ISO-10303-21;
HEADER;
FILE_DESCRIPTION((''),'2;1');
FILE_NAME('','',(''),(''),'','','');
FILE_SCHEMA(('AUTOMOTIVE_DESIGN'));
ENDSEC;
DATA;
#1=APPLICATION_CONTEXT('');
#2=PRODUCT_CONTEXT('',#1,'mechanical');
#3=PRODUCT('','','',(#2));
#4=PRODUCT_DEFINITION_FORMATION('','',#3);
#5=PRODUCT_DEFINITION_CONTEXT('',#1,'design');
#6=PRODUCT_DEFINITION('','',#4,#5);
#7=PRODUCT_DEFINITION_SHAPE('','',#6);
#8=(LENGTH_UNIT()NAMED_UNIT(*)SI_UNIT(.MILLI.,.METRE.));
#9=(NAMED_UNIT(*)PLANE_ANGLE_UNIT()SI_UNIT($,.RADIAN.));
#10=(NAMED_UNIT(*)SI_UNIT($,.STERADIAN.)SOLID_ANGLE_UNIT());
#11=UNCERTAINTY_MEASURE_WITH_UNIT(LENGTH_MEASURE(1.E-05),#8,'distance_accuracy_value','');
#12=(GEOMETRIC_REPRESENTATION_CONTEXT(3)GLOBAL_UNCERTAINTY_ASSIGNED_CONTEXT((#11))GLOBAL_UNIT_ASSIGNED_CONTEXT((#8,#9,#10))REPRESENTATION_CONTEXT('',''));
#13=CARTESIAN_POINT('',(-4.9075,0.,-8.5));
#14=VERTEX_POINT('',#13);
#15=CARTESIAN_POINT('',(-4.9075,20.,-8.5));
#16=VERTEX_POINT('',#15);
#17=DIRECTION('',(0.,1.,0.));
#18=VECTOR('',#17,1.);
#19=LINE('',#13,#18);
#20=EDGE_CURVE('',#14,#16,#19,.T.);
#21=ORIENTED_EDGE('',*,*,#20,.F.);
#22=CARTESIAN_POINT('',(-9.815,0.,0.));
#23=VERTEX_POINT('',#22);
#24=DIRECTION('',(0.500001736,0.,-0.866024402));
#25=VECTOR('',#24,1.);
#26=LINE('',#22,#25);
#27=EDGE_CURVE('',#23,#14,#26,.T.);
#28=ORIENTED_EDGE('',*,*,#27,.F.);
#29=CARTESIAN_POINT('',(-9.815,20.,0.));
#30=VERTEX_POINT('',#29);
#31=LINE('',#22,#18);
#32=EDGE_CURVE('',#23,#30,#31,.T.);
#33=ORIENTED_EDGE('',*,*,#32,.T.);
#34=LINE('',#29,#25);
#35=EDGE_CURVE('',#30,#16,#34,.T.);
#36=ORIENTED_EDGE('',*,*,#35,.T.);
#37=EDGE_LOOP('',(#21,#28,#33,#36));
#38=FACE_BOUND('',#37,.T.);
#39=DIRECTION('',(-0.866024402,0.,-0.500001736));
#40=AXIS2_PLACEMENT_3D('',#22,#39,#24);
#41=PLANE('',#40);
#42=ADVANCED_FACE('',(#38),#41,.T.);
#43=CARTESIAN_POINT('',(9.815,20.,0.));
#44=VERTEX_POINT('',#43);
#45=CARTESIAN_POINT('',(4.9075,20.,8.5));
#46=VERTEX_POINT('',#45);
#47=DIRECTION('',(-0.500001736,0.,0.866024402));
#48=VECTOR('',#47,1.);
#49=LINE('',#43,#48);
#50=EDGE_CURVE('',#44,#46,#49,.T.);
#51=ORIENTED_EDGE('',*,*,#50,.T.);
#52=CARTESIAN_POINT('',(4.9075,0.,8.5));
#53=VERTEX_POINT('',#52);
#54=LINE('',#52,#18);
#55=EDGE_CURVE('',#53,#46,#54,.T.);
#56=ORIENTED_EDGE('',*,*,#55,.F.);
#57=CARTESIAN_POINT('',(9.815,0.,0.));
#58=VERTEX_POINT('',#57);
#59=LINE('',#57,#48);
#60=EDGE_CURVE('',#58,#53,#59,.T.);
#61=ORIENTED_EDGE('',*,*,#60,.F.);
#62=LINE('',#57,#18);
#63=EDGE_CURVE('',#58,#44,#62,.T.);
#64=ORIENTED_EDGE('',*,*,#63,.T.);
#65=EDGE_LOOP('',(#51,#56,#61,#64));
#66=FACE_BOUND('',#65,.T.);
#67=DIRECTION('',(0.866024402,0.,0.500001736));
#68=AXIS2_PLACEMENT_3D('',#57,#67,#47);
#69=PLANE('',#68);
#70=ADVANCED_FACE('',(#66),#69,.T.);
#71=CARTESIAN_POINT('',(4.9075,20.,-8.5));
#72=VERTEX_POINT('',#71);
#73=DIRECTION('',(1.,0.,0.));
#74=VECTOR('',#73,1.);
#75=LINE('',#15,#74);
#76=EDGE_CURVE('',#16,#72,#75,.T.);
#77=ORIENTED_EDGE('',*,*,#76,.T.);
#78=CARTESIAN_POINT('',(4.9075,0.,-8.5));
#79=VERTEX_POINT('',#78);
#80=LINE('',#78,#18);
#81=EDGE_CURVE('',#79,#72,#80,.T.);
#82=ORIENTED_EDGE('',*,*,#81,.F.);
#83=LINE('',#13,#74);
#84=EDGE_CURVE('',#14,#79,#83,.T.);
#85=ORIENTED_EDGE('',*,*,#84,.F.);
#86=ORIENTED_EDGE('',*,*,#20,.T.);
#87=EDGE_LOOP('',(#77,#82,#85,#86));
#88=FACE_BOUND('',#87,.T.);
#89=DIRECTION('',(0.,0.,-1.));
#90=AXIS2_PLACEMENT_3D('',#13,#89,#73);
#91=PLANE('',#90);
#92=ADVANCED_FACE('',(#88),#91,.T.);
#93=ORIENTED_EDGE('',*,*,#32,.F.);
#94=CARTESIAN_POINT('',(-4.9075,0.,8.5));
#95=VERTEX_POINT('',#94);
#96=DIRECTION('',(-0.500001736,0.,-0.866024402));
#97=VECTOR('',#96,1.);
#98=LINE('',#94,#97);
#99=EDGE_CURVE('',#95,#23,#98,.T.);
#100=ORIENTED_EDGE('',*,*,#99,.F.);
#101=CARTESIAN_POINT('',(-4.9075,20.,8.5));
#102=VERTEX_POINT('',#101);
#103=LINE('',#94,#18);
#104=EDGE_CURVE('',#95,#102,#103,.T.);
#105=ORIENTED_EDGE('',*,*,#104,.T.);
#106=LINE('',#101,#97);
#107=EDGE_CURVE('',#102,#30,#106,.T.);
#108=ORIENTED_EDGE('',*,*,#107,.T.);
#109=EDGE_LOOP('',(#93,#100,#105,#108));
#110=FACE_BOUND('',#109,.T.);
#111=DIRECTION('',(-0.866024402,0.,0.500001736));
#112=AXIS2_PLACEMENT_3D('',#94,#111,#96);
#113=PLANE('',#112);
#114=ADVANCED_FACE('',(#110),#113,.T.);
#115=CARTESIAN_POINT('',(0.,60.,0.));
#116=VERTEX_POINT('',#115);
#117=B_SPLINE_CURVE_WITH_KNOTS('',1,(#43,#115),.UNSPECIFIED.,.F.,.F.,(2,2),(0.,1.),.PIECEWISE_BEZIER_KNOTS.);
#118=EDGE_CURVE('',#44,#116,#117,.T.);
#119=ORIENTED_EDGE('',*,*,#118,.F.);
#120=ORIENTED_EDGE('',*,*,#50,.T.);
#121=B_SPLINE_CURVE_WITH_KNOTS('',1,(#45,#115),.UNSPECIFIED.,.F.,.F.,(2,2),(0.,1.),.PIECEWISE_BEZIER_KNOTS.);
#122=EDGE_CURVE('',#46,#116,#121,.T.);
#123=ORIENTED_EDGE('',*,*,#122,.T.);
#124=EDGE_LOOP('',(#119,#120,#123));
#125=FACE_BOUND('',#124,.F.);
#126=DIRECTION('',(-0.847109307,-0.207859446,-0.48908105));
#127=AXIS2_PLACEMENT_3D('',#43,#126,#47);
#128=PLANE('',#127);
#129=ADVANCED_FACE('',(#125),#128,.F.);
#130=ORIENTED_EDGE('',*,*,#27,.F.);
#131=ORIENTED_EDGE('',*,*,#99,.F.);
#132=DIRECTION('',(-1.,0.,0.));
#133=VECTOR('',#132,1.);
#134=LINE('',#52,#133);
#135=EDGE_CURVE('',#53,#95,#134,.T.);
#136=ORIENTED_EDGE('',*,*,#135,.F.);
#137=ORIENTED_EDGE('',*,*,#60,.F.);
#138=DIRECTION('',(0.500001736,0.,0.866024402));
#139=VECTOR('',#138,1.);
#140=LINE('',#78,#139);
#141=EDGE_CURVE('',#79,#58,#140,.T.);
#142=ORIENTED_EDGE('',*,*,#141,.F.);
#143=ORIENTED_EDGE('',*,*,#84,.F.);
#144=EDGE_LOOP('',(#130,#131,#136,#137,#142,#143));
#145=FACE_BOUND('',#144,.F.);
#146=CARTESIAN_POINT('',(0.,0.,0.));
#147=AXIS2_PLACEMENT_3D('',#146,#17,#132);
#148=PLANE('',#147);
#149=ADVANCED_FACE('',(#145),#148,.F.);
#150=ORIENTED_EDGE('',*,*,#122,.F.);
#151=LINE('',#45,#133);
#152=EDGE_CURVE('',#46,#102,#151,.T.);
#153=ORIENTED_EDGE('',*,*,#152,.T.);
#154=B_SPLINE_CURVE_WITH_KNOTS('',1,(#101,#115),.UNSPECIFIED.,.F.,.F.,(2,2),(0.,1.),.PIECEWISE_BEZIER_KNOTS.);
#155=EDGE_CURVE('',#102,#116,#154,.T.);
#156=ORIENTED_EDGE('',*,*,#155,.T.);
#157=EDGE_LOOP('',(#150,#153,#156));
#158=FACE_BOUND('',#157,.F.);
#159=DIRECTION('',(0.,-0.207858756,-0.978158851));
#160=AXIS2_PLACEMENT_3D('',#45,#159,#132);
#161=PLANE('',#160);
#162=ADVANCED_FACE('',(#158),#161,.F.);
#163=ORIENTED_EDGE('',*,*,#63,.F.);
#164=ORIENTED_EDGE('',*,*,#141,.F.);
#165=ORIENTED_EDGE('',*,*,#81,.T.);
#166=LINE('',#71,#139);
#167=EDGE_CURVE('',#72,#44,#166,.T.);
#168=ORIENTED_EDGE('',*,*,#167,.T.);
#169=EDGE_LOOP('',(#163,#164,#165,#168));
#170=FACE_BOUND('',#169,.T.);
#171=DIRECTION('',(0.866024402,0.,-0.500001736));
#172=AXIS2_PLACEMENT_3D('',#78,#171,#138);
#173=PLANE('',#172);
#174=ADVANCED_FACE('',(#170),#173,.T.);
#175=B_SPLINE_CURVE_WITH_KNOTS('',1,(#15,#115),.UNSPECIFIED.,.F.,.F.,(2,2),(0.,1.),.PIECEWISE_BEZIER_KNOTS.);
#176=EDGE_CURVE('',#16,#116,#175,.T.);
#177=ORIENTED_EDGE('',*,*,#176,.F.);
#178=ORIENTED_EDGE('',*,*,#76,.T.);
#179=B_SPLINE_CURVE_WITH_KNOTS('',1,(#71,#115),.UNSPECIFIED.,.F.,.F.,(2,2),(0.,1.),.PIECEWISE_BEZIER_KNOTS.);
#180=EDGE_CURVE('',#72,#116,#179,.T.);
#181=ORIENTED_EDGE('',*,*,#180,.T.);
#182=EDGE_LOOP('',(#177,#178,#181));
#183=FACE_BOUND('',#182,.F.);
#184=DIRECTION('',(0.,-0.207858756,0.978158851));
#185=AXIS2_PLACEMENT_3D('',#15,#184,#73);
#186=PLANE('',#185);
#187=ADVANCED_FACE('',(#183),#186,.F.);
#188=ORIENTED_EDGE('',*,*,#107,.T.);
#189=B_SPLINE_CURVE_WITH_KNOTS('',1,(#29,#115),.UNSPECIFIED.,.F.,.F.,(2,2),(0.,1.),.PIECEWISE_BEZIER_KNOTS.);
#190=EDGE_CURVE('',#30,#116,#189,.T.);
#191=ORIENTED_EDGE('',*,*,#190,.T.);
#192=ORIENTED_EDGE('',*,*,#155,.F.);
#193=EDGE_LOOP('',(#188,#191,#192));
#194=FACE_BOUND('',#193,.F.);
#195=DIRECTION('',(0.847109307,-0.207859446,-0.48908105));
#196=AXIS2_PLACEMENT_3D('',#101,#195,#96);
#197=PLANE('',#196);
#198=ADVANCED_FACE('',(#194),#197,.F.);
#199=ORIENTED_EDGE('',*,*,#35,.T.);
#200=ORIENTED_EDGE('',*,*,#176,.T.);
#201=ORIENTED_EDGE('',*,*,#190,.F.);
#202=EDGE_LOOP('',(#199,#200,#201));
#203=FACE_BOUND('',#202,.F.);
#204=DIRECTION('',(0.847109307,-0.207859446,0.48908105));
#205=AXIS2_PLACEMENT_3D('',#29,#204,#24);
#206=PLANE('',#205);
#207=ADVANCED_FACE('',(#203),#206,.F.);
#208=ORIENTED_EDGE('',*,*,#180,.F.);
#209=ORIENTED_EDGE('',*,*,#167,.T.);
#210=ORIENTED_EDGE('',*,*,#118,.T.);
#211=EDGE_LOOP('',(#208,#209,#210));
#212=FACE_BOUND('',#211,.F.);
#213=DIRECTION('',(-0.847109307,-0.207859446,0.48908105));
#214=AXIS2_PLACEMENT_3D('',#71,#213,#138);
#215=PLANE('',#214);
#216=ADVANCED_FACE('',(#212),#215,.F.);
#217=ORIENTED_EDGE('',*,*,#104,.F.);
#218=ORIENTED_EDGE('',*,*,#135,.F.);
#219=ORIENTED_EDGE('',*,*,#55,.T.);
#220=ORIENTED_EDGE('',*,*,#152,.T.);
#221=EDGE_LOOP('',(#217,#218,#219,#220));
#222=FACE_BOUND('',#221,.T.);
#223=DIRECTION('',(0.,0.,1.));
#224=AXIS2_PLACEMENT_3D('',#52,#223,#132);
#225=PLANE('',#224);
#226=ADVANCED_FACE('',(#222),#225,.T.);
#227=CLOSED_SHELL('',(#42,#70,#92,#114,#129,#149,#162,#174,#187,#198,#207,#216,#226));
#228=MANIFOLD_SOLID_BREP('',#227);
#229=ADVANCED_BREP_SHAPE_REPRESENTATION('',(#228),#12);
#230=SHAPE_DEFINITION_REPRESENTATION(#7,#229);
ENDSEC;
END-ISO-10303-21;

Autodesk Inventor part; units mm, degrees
ref_plane "YZ Plane" through (0, 0, 0) normal (1, 0, 0) x (0, 1, 0)
ref_plane "XZ Plane" through (0, 0, 0) normal (0, 1, 0) x (-1, 0, 0)
ref_plane "XY Plane" through (0, 0, 0) normal (0, 0, 1) x (1, 0, 0)
sketch "Sketch1" plane through (0, 0, 0) normal (0, 1, 0) x (-1, 0, 0)
  line L0 (-4.9075, -8.5) -> (-9.815, 0)
  line L1 (-9.815, 0) -> (-4.9075, 8.5)
  line L2 (-4.9075, 8.5) -> (4.9075, 8.5)
  line L3 (4.9075, 8.5) -> (9.815, 0)
  line L4 (9.815, 0) -> (4.9075, -8.5)
  line L5 (4.9075, -8.5) -> (-4.9075, -8.5)
  point P0 (0, 0)
  point P1 (0, 0)
  dimension "d0" = 17
extrude "Extrusion1" add sketch "Sketch1" along normal blind 20
ref_plane "Work Plane1" through (0, 60, 0) normal (0, 1, 0) x (1, 0, 0)
sketch "Sketch2" plane through (0, 60, 0) normal (0, 1, 0) x (1, 0, 0)
  point P0 (0, 0)
  point P1 (0, 0)
loft "Loft1" add section 1 edges at (-7.3612, 20, -4.25) (-7.3612, 20, 4.25) (0, 20, 8.5) (7.3612, 20, 4.25) (7.3612, 20, -4.25) (0, 20, -8.5) section 2 point at (0, 60, 0)
properties part number "Punta caibración_3DPrint"
